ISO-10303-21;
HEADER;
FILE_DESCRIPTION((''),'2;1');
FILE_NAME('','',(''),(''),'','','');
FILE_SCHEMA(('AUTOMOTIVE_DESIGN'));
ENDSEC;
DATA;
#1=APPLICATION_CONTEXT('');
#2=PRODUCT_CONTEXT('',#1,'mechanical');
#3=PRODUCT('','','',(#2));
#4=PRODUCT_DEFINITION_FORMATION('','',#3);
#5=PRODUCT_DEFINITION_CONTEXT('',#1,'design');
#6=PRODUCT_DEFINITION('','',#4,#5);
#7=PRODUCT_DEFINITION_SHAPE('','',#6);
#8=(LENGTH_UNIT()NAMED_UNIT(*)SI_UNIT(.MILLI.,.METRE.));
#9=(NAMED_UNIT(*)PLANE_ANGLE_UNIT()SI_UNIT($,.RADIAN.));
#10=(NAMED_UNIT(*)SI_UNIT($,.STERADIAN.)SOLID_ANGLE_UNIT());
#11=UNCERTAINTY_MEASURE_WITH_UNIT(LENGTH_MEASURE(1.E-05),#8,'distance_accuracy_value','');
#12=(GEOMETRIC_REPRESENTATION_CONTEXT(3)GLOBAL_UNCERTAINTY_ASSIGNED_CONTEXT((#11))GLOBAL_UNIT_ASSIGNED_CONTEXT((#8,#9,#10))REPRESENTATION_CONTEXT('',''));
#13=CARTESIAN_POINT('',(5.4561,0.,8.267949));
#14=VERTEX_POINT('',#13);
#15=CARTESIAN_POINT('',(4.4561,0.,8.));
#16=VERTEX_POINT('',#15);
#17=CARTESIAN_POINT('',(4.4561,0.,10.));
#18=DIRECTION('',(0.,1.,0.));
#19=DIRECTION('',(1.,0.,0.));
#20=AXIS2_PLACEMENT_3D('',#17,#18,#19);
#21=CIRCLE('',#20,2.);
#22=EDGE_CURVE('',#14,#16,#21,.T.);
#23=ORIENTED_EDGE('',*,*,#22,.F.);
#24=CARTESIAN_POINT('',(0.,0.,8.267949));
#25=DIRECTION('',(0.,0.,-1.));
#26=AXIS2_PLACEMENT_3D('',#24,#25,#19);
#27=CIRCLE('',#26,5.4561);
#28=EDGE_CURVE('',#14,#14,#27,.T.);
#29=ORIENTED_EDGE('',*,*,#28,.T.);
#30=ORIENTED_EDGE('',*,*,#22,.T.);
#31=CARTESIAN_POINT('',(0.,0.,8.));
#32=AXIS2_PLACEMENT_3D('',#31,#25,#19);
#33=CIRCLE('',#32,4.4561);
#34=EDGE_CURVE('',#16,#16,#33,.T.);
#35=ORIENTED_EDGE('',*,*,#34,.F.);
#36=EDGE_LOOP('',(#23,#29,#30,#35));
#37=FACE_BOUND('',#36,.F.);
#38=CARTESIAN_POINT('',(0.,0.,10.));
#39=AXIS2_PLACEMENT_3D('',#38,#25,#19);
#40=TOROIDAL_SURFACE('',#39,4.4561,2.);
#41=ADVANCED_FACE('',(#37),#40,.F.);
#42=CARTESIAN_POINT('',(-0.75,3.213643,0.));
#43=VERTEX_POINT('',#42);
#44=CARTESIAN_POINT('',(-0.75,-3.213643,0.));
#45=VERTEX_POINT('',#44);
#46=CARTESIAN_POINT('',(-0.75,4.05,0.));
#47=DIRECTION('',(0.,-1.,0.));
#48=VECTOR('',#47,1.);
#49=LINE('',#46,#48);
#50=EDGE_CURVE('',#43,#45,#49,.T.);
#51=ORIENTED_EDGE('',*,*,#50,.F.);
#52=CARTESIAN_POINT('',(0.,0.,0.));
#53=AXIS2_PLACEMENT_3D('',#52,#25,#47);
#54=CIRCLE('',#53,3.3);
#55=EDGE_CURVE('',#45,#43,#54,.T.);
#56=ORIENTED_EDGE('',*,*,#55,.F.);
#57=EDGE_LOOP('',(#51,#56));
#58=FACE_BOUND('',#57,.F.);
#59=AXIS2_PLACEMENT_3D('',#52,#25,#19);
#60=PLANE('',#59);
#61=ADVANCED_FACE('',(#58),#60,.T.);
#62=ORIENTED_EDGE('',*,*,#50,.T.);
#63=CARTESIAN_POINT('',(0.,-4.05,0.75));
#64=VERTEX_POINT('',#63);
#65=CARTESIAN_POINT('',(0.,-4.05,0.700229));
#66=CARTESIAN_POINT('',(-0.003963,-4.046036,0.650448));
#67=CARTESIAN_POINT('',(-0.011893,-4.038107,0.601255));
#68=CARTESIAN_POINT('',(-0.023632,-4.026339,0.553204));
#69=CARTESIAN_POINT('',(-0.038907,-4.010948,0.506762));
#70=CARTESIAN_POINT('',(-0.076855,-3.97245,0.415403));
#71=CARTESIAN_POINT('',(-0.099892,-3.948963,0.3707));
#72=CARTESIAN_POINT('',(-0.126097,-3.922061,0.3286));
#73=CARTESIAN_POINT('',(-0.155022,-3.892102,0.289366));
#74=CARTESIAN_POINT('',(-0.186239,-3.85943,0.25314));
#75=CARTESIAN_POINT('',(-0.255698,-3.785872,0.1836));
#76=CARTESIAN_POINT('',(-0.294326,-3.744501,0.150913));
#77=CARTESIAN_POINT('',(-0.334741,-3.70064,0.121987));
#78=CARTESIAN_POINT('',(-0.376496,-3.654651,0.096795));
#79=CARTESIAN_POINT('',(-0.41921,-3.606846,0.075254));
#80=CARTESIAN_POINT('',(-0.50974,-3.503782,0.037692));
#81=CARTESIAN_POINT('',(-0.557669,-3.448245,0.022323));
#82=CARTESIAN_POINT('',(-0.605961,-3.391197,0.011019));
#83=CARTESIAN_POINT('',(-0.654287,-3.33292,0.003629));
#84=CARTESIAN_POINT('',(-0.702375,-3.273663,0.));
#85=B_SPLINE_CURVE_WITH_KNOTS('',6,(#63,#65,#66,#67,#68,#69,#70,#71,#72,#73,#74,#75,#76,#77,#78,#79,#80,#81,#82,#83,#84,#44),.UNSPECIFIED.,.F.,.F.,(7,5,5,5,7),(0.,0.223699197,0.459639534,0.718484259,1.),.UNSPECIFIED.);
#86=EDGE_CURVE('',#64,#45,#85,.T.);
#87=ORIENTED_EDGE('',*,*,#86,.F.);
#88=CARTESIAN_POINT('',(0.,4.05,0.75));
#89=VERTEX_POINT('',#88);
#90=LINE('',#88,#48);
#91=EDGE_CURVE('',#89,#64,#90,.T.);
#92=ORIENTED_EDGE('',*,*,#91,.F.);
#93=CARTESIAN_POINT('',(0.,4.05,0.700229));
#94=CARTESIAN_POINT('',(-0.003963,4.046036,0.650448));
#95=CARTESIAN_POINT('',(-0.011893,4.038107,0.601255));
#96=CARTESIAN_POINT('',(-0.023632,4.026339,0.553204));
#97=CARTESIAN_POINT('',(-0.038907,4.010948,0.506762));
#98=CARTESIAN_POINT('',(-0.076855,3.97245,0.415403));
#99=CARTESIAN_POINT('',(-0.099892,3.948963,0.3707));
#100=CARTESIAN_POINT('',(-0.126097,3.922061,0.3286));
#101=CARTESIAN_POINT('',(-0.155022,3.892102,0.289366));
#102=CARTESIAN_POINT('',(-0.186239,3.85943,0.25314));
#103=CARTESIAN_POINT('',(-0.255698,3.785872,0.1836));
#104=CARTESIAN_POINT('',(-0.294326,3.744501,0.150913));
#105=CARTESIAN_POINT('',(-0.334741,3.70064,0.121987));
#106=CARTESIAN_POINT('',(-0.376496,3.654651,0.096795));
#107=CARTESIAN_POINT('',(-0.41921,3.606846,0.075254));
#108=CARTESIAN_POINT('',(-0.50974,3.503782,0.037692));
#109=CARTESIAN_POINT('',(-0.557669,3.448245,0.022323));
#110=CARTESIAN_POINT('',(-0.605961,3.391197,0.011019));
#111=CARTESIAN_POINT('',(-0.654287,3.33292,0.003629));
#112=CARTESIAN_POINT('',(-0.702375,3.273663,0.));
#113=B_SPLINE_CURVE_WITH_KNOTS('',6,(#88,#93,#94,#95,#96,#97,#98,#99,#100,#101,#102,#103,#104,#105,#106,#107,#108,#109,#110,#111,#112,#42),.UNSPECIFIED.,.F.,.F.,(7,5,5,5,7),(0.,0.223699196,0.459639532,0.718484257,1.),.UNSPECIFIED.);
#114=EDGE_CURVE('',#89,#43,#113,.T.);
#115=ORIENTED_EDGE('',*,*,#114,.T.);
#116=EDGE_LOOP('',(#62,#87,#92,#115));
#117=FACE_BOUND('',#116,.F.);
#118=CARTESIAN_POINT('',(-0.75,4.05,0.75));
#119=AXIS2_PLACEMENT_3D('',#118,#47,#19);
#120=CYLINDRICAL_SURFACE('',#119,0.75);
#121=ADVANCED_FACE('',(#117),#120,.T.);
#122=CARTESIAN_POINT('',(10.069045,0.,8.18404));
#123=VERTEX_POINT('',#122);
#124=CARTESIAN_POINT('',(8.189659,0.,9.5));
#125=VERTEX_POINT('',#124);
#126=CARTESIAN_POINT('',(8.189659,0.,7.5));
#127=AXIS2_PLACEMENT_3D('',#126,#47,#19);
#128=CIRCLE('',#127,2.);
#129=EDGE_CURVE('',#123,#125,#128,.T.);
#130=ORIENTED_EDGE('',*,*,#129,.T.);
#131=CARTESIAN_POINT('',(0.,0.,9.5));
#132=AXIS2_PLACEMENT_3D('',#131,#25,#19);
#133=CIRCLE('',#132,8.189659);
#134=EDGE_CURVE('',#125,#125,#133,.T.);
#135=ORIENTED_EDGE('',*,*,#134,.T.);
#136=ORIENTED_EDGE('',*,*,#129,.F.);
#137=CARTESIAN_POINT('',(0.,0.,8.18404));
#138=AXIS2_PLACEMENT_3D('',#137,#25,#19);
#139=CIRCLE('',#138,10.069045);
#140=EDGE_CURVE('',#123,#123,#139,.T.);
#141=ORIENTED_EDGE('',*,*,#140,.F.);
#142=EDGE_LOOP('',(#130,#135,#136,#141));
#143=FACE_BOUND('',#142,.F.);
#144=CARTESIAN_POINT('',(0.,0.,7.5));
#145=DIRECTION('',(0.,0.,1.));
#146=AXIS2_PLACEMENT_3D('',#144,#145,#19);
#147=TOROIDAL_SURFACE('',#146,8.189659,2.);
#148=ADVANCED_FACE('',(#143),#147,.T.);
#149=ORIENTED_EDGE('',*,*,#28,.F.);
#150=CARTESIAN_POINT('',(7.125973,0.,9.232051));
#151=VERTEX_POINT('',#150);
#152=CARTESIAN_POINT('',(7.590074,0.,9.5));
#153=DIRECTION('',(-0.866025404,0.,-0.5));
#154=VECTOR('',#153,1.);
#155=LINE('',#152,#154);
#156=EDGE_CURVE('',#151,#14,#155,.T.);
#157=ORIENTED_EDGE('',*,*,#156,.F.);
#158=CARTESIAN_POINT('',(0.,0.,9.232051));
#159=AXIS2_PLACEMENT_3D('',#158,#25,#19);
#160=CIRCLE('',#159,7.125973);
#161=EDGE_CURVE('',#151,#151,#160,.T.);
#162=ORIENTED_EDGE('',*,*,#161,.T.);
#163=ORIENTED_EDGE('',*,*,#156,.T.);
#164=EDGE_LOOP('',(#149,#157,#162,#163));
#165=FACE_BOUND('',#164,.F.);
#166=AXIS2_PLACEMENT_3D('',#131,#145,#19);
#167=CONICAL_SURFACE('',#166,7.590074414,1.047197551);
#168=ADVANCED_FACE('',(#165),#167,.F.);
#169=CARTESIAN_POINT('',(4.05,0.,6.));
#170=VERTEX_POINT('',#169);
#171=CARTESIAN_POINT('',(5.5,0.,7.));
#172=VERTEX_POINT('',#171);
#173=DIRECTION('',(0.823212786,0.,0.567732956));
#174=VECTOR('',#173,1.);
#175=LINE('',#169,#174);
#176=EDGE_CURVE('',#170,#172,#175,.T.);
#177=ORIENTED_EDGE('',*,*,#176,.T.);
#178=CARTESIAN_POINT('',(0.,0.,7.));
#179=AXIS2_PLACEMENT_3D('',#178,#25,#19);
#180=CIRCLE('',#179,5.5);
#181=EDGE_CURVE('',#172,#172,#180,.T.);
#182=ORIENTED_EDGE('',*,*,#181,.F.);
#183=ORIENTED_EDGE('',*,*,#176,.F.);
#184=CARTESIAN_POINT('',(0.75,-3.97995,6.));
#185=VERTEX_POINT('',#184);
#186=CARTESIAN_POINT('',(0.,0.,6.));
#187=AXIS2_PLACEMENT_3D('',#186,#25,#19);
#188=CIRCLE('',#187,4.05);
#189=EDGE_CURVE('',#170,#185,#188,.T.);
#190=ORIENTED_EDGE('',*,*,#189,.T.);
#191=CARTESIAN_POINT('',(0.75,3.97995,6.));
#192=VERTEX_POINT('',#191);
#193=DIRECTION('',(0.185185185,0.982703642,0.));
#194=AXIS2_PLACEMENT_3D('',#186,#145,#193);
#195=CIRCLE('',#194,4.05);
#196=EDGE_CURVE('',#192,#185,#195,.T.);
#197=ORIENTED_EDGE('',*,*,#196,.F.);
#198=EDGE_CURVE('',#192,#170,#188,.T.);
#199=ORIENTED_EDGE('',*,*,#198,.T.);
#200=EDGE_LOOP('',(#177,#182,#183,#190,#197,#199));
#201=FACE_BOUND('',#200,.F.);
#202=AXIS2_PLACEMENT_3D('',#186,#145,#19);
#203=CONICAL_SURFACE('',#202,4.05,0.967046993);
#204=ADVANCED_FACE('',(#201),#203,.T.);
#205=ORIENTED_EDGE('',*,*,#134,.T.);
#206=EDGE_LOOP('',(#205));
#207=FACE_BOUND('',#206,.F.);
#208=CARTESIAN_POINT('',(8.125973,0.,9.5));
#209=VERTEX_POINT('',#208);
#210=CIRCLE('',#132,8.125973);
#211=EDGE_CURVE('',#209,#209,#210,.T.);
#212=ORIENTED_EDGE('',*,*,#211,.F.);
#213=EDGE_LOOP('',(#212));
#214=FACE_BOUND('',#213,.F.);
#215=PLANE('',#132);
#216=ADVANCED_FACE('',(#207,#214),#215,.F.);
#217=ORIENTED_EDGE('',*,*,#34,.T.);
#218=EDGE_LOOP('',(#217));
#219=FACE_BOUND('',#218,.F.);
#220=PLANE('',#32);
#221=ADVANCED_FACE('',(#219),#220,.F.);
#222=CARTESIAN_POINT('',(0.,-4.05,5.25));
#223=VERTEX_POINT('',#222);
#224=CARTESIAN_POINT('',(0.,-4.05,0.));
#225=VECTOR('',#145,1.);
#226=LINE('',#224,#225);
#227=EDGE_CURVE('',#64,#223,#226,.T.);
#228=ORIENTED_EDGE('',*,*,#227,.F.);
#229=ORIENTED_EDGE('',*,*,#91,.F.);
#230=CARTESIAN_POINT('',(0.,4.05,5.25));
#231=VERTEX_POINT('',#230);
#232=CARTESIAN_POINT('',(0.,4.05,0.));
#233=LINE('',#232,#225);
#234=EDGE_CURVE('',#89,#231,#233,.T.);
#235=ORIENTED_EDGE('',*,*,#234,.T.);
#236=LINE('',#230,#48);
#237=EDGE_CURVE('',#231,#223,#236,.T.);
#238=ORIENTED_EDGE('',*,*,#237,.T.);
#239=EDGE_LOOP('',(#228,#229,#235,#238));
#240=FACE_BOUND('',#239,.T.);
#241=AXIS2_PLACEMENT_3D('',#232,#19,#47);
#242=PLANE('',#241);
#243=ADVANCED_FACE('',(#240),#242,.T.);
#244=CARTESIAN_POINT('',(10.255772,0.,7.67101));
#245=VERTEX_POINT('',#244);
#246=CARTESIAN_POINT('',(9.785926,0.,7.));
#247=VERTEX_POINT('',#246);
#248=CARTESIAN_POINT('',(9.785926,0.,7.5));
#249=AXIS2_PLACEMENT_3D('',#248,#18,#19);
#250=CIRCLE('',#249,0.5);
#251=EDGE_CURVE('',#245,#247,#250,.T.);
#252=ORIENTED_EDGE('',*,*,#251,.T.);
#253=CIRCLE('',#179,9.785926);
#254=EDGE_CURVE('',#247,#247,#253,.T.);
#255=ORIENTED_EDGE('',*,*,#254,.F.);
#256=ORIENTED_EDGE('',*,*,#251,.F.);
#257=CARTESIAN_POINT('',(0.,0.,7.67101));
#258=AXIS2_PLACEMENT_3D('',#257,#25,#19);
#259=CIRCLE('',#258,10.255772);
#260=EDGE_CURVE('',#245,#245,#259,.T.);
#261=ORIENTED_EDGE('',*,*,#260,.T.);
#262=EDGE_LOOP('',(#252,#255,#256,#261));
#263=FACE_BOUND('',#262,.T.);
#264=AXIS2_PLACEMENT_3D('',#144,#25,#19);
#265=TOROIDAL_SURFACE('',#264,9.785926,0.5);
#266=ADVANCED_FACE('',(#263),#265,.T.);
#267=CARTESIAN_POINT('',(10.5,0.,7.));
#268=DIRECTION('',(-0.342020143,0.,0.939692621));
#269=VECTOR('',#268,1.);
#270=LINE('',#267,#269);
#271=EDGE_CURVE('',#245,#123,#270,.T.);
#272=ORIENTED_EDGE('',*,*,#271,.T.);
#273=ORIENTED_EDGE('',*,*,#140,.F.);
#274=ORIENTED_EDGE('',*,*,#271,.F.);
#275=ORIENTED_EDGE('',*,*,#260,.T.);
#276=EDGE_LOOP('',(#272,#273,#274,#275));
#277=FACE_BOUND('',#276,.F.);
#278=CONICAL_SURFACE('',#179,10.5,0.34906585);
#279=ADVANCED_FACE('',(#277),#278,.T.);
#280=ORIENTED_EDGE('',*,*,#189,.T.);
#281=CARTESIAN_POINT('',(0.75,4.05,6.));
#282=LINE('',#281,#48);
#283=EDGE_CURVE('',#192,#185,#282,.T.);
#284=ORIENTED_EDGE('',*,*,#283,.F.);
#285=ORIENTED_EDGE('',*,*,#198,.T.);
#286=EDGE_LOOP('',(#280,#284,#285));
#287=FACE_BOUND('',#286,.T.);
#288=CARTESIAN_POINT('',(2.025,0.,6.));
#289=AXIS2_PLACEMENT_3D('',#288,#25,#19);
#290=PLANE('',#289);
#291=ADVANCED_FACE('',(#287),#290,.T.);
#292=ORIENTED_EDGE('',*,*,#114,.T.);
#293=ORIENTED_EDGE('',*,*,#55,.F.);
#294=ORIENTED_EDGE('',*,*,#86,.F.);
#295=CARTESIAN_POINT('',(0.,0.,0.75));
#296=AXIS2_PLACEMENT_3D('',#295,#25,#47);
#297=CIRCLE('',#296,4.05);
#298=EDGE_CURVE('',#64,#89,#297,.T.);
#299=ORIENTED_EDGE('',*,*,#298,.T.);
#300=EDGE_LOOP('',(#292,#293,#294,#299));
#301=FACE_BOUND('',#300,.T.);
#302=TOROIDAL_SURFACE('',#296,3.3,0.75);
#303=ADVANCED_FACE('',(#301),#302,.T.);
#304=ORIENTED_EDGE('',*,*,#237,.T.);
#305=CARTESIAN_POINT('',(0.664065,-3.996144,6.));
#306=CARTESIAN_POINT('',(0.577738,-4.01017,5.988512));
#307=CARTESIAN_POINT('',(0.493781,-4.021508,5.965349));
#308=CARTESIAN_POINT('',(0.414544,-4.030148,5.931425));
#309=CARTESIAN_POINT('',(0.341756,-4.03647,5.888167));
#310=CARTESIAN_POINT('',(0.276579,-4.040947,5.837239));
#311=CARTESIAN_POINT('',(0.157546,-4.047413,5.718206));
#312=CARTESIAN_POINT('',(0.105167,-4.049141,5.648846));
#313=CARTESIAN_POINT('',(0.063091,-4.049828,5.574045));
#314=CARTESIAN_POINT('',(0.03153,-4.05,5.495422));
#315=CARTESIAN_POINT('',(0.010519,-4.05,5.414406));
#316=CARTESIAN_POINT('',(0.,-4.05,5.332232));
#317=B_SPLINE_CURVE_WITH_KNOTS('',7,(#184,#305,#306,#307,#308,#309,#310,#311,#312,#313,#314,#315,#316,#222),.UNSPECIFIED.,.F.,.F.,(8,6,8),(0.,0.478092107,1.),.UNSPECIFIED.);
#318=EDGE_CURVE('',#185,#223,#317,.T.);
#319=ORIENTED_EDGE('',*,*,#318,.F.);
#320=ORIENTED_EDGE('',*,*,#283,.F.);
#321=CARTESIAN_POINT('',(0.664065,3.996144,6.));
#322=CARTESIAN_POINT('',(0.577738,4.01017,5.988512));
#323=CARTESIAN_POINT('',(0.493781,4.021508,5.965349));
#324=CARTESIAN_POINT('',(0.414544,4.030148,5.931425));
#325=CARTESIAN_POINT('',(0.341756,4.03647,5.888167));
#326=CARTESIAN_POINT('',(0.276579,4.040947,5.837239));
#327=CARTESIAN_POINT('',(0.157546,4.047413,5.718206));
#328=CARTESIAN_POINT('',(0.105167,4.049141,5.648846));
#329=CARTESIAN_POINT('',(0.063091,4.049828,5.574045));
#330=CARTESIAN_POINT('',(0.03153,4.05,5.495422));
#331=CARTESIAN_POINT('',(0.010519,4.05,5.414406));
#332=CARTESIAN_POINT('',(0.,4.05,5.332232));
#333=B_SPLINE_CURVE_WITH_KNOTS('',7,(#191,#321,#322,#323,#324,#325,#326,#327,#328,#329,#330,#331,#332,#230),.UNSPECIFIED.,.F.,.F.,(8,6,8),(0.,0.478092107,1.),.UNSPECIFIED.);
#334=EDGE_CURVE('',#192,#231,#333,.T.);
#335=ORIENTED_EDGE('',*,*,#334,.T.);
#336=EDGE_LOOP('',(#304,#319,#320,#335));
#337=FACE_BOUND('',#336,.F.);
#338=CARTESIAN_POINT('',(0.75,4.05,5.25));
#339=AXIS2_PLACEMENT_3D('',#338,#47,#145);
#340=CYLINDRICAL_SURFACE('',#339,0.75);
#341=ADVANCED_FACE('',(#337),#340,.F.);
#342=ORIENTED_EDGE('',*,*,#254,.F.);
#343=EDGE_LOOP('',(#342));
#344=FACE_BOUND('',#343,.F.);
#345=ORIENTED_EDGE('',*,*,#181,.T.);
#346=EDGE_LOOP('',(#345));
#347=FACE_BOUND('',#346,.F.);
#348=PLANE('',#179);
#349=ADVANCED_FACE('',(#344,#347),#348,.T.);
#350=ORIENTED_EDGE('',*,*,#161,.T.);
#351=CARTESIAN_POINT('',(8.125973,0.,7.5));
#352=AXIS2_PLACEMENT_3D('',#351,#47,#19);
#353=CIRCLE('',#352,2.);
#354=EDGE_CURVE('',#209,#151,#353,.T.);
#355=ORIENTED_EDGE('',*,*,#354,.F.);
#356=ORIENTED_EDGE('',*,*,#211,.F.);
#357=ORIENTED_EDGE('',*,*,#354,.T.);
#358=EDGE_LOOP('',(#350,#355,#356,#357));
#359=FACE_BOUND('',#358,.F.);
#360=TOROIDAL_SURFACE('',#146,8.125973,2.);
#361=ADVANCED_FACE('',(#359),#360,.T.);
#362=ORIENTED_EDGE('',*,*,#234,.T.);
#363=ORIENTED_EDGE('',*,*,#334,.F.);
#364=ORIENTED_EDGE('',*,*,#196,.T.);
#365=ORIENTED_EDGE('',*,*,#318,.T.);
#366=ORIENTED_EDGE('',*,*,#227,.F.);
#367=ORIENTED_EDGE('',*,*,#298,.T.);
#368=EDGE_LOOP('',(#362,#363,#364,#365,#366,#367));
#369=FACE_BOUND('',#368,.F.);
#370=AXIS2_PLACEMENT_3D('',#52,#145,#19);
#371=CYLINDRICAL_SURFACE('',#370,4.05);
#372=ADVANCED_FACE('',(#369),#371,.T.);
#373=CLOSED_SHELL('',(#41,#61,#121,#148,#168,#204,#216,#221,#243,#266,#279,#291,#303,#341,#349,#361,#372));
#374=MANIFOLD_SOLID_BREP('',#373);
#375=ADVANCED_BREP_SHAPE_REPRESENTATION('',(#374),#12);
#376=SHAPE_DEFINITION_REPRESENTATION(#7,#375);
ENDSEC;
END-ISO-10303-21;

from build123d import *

# Parameters (mm, degrees)
F2_W     = 4.05
F2_H     = 8.1
F3_DEPTH = 6
F4_R     = 0.75
F5_R     = 2
F6_R     = 0.5


with BuildPart() as f1:
    # F0 (on Front) → F1 (revolve)
    with BuildSketch(Plane.XZ):
        Polygon((4.05, 0), (4.05, 6), (5.5, 7), (10.5, 7), (9.5900744143, 9.5), (7.5900744143, 9.5), (4.991998203, 8), (0, 8), (0, 0), align=None)
    revolve(axis=Axis((0, 0, 4), (0, 0, -1)))

    # F2 (on face) → F3 (cut)
    with BuildSketch(Plane(origin=(0, 0, 0), x_dir=(1, 0, 0), z_dir=(0, 0, -1))):
        with Locations((2.025, 0)):
            Rectangle(F2_W, F2_H)
    extrude(amount=-F3_DEPTH, mode=Mode.SUBTRACT)

    # F4
    f4_edges = [f1.edges().sort_by_distance(p)[0] for p in [
        (0, 0, 0),
        (0, 0, 6),
        (-4.05, 0, 0),
    ]]
    fillet(f4_edges, radius=F4_R)

    # F5
    f5_edges = [f1.edges().sort_by_distance(p)[0] for p in [
        (-9.590074, 0, 9.5),
        (-7.590074, 0, 9.5),
        (-4.991998, 0, 8),
    ]]
    fillet(f5_edges, radius=F5_R)

    # F6
    f6_edges = [f1.edges().sort_by_distance(p)[0] for p in [
        (-10.5, 0, 7),
    ]]
    fillet(f6_edges, radius=F6_R)


solid = f1.part
